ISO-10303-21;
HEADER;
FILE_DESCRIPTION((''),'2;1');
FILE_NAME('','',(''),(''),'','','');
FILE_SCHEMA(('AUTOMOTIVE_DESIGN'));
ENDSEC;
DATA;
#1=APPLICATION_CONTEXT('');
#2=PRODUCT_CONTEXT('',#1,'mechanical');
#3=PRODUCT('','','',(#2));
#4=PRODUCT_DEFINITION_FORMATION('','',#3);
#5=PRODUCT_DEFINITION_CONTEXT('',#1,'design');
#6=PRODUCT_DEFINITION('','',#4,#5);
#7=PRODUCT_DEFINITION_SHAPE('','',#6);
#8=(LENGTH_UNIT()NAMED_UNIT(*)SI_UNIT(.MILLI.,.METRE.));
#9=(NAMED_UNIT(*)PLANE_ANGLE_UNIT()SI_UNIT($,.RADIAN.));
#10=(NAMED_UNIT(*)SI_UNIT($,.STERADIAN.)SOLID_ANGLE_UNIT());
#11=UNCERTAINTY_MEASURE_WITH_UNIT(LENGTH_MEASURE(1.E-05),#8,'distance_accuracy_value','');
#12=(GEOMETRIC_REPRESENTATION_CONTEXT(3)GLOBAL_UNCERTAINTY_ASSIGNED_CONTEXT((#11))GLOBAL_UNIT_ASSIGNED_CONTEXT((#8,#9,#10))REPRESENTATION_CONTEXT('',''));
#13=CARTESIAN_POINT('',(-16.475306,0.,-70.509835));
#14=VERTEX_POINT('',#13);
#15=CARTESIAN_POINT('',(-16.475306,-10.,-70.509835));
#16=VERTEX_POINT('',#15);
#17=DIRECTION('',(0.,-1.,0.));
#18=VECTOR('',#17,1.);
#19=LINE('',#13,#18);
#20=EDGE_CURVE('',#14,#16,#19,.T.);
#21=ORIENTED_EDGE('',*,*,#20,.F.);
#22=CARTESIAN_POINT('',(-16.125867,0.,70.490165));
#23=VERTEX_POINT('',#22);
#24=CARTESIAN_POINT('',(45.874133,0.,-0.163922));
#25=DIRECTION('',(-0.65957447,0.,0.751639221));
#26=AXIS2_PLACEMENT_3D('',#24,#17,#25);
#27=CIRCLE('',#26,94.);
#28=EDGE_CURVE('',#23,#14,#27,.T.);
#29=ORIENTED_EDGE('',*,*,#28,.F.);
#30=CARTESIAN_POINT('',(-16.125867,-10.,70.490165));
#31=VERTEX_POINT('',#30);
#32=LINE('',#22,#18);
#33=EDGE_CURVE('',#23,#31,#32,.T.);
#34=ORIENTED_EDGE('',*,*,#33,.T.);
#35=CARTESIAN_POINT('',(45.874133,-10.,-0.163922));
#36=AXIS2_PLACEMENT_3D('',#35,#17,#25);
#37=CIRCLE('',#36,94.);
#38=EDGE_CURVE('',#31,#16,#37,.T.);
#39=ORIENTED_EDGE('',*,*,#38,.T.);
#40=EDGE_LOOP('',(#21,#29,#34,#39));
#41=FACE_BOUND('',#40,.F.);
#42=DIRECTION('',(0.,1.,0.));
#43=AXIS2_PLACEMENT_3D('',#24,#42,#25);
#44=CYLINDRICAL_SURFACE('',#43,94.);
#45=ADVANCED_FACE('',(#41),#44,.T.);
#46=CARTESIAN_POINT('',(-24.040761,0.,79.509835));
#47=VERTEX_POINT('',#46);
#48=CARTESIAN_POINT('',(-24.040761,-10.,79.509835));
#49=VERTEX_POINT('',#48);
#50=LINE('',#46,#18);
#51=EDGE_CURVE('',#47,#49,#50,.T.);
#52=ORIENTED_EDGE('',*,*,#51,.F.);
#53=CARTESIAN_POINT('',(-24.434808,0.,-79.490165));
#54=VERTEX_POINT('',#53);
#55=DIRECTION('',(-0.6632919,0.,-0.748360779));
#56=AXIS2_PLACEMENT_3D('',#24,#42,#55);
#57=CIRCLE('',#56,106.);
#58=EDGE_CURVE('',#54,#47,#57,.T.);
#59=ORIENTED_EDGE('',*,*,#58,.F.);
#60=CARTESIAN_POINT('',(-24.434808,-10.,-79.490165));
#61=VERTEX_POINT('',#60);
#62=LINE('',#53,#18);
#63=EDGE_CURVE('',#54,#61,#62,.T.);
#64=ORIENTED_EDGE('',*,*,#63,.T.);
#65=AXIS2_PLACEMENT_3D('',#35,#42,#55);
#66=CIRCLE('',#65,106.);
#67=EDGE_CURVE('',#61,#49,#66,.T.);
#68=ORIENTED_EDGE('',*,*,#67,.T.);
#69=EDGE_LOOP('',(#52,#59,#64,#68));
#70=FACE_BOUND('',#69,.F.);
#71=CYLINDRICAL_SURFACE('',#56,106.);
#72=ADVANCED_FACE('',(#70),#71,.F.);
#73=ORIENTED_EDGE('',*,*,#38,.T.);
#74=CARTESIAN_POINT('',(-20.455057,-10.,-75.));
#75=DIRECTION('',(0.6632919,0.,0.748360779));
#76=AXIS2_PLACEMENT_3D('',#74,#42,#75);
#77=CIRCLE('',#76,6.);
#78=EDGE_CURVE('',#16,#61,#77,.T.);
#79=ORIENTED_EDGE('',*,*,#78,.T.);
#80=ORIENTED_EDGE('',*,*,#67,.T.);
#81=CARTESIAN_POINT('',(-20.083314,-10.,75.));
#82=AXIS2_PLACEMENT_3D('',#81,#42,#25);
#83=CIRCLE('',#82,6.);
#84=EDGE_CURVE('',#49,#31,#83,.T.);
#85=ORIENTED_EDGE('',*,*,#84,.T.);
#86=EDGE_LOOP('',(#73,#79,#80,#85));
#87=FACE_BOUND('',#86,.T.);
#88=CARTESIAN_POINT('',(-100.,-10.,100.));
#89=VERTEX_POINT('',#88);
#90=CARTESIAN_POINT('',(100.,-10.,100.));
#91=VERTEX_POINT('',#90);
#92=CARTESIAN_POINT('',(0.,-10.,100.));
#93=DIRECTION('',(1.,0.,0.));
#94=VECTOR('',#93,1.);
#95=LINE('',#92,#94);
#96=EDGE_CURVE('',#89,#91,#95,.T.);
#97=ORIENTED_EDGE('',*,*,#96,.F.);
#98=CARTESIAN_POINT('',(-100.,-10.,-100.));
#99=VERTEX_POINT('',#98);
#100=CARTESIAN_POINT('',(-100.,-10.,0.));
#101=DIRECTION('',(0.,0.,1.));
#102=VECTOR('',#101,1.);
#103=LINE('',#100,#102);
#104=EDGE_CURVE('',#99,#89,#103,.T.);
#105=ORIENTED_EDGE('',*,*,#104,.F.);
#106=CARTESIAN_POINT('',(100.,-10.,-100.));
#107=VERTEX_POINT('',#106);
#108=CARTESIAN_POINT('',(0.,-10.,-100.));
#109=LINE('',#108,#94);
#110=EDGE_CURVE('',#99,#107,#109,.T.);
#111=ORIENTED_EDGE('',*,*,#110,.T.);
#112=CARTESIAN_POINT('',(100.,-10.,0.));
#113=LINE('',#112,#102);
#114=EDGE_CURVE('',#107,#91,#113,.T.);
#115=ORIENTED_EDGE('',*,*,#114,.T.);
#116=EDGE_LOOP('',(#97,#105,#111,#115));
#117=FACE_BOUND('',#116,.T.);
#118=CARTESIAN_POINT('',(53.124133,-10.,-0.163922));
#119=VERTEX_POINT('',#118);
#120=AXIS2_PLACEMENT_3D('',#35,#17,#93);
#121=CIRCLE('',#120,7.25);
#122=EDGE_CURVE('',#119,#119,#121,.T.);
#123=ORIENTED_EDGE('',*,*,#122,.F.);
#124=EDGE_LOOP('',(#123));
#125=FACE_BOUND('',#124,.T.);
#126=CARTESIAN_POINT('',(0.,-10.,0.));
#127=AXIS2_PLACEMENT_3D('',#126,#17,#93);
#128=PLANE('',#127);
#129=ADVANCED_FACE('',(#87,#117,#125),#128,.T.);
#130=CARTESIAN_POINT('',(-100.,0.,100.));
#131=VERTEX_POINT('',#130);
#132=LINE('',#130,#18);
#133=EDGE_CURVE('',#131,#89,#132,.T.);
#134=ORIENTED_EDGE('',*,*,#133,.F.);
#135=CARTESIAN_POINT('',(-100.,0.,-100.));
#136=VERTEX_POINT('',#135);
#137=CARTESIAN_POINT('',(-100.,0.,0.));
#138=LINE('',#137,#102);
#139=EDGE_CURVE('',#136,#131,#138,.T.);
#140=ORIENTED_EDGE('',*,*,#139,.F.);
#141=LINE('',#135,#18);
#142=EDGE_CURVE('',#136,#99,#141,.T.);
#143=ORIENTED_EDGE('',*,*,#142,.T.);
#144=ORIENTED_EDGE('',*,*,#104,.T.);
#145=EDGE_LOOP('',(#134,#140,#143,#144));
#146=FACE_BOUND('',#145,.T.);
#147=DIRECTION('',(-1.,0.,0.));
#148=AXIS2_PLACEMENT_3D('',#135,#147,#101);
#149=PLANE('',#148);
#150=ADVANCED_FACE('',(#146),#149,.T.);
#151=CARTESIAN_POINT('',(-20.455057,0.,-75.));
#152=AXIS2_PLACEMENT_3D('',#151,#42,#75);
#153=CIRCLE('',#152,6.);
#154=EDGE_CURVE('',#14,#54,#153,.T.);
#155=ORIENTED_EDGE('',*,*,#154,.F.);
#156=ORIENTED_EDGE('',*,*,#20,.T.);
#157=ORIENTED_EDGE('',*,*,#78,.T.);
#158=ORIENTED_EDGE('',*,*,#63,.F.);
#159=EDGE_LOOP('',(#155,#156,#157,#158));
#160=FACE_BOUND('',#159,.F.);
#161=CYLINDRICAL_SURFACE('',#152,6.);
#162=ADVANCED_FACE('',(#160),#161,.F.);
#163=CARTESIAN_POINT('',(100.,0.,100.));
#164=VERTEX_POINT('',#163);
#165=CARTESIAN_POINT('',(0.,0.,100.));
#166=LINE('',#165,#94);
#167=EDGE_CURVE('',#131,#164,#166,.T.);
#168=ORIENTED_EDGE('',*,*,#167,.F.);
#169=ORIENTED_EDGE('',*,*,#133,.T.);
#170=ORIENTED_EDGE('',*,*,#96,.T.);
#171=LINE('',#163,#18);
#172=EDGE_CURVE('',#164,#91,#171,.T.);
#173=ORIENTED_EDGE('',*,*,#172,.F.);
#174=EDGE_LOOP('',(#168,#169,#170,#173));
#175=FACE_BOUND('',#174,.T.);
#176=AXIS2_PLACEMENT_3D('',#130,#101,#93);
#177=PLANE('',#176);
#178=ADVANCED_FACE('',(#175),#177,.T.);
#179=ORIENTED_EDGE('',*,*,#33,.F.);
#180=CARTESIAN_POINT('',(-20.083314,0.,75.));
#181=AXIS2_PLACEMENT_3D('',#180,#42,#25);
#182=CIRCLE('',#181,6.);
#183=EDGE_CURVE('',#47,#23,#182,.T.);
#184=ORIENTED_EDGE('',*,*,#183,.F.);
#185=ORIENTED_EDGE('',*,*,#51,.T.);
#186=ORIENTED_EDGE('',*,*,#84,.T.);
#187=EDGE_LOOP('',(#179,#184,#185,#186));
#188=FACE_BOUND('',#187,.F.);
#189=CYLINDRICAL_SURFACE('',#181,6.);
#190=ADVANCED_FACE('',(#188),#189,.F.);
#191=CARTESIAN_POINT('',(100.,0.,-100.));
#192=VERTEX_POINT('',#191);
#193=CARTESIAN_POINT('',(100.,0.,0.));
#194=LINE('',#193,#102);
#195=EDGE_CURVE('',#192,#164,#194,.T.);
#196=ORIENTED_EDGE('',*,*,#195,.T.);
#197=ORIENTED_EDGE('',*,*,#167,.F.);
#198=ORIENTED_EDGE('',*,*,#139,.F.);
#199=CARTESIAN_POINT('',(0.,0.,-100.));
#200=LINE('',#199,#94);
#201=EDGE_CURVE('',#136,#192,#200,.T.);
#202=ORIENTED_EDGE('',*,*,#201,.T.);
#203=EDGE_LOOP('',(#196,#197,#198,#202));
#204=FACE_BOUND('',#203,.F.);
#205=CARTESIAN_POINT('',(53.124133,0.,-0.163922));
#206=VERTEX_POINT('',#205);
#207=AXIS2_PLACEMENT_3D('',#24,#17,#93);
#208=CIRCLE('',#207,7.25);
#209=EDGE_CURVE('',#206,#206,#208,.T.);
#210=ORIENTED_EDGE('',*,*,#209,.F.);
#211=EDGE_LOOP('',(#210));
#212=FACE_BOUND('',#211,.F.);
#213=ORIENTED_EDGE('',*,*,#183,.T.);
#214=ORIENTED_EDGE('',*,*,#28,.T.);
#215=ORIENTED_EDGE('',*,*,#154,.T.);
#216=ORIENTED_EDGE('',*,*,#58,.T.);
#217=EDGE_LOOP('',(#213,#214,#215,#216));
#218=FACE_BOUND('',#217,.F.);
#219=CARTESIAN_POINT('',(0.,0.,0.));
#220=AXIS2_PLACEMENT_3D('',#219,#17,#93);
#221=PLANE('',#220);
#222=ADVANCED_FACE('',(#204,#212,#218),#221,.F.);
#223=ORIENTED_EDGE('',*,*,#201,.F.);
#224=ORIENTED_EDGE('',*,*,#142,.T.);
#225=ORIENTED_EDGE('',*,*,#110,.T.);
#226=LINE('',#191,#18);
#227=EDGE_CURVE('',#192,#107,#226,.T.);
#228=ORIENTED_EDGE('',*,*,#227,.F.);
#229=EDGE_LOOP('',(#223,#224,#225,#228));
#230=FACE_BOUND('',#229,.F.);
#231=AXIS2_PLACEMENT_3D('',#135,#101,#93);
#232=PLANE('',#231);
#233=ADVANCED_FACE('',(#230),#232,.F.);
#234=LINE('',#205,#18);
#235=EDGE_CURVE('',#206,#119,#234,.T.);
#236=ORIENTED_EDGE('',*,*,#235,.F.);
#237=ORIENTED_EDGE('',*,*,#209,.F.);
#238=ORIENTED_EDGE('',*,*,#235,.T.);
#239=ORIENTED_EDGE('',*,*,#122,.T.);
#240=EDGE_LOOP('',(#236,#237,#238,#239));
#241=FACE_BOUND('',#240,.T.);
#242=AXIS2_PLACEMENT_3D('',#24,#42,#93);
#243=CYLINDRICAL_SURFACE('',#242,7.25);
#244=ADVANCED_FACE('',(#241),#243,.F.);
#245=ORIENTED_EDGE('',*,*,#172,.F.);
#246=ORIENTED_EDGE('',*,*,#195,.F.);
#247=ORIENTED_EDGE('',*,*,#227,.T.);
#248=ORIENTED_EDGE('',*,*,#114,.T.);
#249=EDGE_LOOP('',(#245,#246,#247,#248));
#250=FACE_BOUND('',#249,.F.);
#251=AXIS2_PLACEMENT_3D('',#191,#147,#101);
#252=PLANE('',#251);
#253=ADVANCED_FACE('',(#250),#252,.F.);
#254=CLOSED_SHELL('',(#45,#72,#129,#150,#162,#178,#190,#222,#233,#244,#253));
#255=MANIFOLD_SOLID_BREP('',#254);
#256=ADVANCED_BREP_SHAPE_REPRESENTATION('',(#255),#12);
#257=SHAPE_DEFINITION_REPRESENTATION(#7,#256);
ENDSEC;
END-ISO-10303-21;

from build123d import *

# Parameters (mm, degrees)
F0_W     = 200
F0_H     = 200
F0_R     = 7.25
F1_DEPTH = 10


with BuildPart() as f1:
    # F0 (on Front) → F1 (new body)
    with BuildSketch(Plane.XZ):
        Rectangle(F0_W, F0_H)
        with BuildLine():
            ThreePointArc((-24.4348083961, -79.4901646735), (-60.1255414788, 0.098775478), (-24.0407608064, 79.5098353265))
            ThreePointArc((-24.0407608064, 79.5098353265), (-15.5734786606, 78.9574468193), (-16.1258671678, 70.4901646735))
            ThreePointArc((-16.1258671678, 70.4901646735), (-48.12557833, 0.0690361286), (-16.4753055963, -70.5098353265))
            ThreePointArc((-16.4753055963, -70.5098353265), (-15.9648923227, -78.9797513999), (-24.4348083961, -79.4901646735))
        make_face(mode=Mode.SUBTRACT)
        with Locations((45.8741330018, -0.1639221083)):
            Circle(F0_R, mode=Mode.SUBTRACT)
    extrude(amount=F1_DEPTH)


solid = f1.part
